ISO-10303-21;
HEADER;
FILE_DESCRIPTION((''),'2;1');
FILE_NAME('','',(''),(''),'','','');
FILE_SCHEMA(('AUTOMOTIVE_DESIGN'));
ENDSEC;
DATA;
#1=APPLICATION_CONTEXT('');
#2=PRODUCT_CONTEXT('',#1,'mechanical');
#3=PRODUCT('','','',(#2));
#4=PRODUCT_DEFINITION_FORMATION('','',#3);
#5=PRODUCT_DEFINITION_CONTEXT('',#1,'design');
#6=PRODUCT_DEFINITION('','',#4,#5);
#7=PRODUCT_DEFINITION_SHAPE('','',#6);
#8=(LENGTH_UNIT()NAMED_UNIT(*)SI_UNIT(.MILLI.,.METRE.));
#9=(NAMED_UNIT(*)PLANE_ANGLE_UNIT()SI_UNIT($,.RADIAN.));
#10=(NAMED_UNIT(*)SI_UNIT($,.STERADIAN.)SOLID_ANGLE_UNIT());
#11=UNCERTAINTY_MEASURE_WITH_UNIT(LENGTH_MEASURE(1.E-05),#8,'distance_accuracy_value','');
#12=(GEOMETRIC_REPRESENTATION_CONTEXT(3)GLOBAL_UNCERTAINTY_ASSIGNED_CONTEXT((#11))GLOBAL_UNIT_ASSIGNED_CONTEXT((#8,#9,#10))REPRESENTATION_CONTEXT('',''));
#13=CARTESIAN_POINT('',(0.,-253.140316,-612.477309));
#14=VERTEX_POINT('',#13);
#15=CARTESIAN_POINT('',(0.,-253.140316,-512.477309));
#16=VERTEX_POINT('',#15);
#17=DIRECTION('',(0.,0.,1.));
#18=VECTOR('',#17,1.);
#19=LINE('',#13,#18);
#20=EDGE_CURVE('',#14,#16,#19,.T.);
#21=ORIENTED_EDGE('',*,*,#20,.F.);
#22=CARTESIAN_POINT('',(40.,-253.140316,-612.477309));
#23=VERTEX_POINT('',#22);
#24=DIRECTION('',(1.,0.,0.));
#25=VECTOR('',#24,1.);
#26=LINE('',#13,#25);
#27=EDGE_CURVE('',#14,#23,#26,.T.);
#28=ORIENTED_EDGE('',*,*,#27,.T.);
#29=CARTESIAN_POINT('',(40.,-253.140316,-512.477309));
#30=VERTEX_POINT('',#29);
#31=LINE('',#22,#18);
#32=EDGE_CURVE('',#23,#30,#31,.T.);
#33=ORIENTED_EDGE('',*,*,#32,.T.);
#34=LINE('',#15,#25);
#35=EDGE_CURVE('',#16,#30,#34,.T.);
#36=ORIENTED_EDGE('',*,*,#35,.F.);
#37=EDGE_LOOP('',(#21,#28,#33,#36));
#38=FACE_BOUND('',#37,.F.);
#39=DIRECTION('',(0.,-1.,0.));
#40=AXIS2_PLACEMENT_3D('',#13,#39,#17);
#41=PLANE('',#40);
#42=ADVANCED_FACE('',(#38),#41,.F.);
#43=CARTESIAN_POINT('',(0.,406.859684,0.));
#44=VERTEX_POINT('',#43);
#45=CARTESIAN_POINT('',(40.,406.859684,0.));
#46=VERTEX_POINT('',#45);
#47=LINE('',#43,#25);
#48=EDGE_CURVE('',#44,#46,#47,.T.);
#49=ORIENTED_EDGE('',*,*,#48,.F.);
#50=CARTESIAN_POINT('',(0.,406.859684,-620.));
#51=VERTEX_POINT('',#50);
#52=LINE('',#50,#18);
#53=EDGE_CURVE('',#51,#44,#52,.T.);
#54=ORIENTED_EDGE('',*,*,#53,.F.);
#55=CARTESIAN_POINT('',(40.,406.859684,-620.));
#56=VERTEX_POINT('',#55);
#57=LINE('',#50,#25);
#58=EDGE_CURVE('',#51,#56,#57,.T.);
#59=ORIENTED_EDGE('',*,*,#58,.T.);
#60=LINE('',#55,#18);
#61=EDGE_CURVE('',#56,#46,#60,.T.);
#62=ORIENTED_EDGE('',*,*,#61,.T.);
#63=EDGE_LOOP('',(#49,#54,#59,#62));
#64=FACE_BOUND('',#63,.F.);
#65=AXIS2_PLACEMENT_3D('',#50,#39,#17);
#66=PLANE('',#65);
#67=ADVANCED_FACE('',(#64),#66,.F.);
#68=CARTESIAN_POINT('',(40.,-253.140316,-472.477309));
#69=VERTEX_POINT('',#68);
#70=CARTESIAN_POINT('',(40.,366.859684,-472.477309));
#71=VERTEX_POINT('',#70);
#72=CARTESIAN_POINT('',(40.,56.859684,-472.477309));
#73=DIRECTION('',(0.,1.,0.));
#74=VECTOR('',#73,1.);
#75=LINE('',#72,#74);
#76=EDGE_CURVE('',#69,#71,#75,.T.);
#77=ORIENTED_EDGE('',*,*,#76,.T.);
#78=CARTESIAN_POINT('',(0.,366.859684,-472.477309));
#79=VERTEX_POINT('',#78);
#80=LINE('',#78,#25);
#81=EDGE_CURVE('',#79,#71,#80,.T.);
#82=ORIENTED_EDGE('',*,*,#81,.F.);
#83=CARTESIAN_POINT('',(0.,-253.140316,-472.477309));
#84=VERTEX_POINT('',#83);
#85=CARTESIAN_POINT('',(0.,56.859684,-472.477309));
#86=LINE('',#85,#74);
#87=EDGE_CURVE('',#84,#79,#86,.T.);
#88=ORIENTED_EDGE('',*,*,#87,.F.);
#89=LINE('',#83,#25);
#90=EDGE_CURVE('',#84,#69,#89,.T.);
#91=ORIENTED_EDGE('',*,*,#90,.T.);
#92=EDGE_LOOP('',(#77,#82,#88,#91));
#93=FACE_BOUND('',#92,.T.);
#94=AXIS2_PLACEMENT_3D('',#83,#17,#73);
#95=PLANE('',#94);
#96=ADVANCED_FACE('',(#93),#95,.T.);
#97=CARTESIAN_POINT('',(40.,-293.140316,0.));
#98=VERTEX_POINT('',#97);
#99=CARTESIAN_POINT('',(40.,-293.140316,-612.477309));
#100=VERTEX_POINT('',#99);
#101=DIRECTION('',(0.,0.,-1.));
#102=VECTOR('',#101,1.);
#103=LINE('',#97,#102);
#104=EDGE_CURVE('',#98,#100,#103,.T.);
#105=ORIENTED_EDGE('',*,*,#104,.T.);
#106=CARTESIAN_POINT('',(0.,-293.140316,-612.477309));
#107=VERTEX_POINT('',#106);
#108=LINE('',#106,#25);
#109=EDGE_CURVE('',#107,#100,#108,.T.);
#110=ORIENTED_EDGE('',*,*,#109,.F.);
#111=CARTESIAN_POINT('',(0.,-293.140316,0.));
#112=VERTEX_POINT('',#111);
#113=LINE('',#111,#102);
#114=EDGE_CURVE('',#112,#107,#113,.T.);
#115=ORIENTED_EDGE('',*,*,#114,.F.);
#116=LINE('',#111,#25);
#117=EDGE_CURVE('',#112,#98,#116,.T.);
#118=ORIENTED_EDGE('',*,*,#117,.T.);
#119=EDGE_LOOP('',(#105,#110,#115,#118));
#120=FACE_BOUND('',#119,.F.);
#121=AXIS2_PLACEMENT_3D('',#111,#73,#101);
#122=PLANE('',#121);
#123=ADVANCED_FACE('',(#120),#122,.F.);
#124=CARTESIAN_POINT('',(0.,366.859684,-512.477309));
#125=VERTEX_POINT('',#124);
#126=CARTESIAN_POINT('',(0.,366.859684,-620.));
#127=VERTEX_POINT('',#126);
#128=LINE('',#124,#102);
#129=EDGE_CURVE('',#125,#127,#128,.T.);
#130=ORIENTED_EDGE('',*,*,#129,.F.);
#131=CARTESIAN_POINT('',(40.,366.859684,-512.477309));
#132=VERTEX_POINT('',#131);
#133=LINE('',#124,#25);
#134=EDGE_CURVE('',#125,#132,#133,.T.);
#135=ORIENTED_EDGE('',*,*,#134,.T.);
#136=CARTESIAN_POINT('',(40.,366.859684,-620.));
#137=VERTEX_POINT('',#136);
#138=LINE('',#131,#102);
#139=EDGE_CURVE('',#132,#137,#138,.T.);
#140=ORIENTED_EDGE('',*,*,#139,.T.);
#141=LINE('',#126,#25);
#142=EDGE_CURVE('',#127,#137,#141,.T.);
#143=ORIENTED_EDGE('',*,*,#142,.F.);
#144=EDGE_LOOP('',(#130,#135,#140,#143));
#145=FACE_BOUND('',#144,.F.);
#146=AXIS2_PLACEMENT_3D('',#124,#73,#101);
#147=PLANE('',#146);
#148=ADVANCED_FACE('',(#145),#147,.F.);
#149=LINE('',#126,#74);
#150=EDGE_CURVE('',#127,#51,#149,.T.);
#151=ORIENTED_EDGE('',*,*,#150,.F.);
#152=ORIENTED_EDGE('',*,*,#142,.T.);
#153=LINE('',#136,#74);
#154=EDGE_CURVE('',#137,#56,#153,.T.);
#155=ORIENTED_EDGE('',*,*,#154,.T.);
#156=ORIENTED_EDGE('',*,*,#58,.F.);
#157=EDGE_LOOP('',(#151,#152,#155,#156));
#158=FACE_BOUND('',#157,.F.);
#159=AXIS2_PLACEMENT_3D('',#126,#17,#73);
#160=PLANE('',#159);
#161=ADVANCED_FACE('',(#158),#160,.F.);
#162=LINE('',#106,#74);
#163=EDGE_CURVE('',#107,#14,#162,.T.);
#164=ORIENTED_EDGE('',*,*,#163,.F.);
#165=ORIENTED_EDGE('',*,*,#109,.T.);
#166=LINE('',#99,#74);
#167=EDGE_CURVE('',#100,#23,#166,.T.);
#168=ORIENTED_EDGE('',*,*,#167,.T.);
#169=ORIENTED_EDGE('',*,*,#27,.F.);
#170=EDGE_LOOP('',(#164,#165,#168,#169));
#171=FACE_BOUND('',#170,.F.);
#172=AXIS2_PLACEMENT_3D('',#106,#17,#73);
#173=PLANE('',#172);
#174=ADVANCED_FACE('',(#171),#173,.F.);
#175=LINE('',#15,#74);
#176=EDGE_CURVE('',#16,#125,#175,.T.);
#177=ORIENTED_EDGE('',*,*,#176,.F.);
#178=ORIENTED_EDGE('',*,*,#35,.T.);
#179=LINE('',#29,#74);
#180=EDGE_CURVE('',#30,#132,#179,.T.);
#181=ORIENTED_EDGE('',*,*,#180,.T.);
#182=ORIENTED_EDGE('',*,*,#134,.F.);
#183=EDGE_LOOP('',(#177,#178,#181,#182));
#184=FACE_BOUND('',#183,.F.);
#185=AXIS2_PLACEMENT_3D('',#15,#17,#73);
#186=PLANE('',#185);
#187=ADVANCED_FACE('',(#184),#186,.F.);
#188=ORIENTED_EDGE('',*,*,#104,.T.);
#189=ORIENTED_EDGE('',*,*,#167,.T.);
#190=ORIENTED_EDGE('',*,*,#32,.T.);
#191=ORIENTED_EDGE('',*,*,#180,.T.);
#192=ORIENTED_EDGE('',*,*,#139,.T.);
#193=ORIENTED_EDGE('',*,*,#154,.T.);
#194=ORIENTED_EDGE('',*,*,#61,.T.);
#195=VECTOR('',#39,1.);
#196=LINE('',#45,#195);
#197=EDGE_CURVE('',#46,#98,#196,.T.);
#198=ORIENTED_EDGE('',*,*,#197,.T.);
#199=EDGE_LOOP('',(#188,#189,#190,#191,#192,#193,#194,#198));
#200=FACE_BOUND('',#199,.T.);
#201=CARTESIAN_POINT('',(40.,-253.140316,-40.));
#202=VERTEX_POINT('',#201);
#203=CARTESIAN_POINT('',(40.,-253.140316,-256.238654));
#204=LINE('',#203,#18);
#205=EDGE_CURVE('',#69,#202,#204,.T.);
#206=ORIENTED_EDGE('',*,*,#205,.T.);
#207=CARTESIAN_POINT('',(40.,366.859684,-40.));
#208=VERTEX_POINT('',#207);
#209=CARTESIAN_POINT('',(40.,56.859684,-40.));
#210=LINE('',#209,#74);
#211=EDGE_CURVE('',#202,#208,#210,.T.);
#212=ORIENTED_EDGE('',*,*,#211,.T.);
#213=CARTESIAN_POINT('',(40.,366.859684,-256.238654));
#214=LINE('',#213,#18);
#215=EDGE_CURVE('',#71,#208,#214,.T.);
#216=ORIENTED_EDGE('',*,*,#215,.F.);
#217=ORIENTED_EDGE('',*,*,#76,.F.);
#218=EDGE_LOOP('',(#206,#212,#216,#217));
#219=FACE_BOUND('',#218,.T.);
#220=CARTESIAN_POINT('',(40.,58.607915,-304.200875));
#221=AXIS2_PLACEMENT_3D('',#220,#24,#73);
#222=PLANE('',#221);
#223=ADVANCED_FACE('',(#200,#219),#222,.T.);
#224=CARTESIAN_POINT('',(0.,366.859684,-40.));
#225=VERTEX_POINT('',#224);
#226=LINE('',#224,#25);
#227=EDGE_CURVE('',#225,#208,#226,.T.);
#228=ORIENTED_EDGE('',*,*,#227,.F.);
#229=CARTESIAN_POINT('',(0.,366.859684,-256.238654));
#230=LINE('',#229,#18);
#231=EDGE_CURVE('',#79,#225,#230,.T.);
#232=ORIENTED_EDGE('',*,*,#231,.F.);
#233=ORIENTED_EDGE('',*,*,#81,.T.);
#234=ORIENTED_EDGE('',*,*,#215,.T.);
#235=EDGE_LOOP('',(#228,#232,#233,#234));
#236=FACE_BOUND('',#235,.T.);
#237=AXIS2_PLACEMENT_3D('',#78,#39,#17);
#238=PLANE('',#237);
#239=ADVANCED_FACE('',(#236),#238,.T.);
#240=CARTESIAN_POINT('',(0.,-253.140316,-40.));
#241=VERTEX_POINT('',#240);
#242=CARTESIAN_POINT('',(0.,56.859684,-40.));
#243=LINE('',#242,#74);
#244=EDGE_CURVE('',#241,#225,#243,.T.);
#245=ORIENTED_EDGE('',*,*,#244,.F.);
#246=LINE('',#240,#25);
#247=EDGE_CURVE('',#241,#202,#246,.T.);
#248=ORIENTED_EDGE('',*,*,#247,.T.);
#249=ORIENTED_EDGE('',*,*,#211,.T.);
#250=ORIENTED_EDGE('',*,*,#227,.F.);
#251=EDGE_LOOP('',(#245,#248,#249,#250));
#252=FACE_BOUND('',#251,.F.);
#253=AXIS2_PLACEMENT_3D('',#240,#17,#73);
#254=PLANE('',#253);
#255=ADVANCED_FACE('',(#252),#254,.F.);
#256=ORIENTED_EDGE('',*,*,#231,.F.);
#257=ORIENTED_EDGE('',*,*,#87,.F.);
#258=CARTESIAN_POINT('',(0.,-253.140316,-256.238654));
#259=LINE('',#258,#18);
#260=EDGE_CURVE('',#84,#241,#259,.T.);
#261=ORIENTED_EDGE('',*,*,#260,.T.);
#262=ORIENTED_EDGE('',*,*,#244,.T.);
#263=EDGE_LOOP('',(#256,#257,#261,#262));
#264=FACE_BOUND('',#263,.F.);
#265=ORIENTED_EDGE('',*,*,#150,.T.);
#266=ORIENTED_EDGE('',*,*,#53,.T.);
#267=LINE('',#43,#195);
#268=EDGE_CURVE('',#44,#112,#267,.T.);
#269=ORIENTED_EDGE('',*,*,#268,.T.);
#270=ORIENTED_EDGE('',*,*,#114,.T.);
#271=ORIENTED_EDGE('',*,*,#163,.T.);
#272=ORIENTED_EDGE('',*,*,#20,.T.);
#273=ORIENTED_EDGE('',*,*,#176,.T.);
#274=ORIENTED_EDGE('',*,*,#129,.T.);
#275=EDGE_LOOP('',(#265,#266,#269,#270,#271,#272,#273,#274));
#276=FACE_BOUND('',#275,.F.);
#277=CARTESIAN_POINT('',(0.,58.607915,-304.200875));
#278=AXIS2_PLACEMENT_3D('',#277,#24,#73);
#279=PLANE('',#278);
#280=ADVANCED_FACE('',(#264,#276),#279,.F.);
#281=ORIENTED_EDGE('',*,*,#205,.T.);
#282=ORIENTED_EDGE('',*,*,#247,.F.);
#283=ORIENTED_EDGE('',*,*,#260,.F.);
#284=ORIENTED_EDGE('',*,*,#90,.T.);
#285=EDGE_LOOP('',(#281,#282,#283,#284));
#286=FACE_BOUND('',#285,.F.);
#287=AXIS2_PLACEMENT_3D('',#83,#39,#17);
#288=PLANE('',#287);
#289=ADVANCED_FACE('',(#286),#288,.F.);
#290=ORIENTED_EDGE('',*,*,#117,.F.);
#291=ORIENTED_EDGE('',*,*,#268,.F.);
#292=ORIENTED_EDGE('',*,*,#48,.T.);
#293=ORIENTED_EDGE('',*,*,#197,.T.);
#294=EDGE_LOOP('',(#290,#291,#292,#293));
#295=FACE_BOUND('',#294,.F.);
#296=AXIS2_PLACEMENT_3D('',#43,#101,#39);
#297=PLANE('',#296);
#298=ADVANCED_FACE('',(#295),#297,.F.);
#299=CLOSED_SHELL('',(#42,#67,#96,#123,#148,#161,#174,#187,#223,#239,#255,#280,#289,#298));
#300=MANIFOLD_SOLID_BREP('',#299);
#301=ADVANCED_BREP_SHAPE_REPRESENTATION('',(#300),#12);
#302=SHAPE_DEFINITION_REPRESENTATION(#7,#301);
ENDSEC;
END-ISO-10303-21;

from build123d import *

# Parameters (mm, degrees)
F0_W     = 620
F0_H     = 432.4773087313
F1_DEPTH = 40


# Not quite as in the source:
# - a feature names something its author has since deleted; it is built from what else it names


with BuildPart() as f1:
    # F0 (on Right) → F1 (new body)
    with BuildSketch(Plane.YZ):
        Polygon((406.8596840377, -620), (406.8596840377, 0), (-293.1403159623, 0), (-293.1403159623, -612.4773087313), (-253.1403159623, -612.4773087313), (-253.1403159623, -512.4773087313), (366.8596840377, -512.4773087313), (366.8596840377, -620), align=None)
        with Locations((56.8596840377, -256.2386543657)):
            Rectangle(F0_W, F0_H, mode=Mode.SUBTRACT)
    extrude(amount=F1_DEPTH)


solid = f1.part
